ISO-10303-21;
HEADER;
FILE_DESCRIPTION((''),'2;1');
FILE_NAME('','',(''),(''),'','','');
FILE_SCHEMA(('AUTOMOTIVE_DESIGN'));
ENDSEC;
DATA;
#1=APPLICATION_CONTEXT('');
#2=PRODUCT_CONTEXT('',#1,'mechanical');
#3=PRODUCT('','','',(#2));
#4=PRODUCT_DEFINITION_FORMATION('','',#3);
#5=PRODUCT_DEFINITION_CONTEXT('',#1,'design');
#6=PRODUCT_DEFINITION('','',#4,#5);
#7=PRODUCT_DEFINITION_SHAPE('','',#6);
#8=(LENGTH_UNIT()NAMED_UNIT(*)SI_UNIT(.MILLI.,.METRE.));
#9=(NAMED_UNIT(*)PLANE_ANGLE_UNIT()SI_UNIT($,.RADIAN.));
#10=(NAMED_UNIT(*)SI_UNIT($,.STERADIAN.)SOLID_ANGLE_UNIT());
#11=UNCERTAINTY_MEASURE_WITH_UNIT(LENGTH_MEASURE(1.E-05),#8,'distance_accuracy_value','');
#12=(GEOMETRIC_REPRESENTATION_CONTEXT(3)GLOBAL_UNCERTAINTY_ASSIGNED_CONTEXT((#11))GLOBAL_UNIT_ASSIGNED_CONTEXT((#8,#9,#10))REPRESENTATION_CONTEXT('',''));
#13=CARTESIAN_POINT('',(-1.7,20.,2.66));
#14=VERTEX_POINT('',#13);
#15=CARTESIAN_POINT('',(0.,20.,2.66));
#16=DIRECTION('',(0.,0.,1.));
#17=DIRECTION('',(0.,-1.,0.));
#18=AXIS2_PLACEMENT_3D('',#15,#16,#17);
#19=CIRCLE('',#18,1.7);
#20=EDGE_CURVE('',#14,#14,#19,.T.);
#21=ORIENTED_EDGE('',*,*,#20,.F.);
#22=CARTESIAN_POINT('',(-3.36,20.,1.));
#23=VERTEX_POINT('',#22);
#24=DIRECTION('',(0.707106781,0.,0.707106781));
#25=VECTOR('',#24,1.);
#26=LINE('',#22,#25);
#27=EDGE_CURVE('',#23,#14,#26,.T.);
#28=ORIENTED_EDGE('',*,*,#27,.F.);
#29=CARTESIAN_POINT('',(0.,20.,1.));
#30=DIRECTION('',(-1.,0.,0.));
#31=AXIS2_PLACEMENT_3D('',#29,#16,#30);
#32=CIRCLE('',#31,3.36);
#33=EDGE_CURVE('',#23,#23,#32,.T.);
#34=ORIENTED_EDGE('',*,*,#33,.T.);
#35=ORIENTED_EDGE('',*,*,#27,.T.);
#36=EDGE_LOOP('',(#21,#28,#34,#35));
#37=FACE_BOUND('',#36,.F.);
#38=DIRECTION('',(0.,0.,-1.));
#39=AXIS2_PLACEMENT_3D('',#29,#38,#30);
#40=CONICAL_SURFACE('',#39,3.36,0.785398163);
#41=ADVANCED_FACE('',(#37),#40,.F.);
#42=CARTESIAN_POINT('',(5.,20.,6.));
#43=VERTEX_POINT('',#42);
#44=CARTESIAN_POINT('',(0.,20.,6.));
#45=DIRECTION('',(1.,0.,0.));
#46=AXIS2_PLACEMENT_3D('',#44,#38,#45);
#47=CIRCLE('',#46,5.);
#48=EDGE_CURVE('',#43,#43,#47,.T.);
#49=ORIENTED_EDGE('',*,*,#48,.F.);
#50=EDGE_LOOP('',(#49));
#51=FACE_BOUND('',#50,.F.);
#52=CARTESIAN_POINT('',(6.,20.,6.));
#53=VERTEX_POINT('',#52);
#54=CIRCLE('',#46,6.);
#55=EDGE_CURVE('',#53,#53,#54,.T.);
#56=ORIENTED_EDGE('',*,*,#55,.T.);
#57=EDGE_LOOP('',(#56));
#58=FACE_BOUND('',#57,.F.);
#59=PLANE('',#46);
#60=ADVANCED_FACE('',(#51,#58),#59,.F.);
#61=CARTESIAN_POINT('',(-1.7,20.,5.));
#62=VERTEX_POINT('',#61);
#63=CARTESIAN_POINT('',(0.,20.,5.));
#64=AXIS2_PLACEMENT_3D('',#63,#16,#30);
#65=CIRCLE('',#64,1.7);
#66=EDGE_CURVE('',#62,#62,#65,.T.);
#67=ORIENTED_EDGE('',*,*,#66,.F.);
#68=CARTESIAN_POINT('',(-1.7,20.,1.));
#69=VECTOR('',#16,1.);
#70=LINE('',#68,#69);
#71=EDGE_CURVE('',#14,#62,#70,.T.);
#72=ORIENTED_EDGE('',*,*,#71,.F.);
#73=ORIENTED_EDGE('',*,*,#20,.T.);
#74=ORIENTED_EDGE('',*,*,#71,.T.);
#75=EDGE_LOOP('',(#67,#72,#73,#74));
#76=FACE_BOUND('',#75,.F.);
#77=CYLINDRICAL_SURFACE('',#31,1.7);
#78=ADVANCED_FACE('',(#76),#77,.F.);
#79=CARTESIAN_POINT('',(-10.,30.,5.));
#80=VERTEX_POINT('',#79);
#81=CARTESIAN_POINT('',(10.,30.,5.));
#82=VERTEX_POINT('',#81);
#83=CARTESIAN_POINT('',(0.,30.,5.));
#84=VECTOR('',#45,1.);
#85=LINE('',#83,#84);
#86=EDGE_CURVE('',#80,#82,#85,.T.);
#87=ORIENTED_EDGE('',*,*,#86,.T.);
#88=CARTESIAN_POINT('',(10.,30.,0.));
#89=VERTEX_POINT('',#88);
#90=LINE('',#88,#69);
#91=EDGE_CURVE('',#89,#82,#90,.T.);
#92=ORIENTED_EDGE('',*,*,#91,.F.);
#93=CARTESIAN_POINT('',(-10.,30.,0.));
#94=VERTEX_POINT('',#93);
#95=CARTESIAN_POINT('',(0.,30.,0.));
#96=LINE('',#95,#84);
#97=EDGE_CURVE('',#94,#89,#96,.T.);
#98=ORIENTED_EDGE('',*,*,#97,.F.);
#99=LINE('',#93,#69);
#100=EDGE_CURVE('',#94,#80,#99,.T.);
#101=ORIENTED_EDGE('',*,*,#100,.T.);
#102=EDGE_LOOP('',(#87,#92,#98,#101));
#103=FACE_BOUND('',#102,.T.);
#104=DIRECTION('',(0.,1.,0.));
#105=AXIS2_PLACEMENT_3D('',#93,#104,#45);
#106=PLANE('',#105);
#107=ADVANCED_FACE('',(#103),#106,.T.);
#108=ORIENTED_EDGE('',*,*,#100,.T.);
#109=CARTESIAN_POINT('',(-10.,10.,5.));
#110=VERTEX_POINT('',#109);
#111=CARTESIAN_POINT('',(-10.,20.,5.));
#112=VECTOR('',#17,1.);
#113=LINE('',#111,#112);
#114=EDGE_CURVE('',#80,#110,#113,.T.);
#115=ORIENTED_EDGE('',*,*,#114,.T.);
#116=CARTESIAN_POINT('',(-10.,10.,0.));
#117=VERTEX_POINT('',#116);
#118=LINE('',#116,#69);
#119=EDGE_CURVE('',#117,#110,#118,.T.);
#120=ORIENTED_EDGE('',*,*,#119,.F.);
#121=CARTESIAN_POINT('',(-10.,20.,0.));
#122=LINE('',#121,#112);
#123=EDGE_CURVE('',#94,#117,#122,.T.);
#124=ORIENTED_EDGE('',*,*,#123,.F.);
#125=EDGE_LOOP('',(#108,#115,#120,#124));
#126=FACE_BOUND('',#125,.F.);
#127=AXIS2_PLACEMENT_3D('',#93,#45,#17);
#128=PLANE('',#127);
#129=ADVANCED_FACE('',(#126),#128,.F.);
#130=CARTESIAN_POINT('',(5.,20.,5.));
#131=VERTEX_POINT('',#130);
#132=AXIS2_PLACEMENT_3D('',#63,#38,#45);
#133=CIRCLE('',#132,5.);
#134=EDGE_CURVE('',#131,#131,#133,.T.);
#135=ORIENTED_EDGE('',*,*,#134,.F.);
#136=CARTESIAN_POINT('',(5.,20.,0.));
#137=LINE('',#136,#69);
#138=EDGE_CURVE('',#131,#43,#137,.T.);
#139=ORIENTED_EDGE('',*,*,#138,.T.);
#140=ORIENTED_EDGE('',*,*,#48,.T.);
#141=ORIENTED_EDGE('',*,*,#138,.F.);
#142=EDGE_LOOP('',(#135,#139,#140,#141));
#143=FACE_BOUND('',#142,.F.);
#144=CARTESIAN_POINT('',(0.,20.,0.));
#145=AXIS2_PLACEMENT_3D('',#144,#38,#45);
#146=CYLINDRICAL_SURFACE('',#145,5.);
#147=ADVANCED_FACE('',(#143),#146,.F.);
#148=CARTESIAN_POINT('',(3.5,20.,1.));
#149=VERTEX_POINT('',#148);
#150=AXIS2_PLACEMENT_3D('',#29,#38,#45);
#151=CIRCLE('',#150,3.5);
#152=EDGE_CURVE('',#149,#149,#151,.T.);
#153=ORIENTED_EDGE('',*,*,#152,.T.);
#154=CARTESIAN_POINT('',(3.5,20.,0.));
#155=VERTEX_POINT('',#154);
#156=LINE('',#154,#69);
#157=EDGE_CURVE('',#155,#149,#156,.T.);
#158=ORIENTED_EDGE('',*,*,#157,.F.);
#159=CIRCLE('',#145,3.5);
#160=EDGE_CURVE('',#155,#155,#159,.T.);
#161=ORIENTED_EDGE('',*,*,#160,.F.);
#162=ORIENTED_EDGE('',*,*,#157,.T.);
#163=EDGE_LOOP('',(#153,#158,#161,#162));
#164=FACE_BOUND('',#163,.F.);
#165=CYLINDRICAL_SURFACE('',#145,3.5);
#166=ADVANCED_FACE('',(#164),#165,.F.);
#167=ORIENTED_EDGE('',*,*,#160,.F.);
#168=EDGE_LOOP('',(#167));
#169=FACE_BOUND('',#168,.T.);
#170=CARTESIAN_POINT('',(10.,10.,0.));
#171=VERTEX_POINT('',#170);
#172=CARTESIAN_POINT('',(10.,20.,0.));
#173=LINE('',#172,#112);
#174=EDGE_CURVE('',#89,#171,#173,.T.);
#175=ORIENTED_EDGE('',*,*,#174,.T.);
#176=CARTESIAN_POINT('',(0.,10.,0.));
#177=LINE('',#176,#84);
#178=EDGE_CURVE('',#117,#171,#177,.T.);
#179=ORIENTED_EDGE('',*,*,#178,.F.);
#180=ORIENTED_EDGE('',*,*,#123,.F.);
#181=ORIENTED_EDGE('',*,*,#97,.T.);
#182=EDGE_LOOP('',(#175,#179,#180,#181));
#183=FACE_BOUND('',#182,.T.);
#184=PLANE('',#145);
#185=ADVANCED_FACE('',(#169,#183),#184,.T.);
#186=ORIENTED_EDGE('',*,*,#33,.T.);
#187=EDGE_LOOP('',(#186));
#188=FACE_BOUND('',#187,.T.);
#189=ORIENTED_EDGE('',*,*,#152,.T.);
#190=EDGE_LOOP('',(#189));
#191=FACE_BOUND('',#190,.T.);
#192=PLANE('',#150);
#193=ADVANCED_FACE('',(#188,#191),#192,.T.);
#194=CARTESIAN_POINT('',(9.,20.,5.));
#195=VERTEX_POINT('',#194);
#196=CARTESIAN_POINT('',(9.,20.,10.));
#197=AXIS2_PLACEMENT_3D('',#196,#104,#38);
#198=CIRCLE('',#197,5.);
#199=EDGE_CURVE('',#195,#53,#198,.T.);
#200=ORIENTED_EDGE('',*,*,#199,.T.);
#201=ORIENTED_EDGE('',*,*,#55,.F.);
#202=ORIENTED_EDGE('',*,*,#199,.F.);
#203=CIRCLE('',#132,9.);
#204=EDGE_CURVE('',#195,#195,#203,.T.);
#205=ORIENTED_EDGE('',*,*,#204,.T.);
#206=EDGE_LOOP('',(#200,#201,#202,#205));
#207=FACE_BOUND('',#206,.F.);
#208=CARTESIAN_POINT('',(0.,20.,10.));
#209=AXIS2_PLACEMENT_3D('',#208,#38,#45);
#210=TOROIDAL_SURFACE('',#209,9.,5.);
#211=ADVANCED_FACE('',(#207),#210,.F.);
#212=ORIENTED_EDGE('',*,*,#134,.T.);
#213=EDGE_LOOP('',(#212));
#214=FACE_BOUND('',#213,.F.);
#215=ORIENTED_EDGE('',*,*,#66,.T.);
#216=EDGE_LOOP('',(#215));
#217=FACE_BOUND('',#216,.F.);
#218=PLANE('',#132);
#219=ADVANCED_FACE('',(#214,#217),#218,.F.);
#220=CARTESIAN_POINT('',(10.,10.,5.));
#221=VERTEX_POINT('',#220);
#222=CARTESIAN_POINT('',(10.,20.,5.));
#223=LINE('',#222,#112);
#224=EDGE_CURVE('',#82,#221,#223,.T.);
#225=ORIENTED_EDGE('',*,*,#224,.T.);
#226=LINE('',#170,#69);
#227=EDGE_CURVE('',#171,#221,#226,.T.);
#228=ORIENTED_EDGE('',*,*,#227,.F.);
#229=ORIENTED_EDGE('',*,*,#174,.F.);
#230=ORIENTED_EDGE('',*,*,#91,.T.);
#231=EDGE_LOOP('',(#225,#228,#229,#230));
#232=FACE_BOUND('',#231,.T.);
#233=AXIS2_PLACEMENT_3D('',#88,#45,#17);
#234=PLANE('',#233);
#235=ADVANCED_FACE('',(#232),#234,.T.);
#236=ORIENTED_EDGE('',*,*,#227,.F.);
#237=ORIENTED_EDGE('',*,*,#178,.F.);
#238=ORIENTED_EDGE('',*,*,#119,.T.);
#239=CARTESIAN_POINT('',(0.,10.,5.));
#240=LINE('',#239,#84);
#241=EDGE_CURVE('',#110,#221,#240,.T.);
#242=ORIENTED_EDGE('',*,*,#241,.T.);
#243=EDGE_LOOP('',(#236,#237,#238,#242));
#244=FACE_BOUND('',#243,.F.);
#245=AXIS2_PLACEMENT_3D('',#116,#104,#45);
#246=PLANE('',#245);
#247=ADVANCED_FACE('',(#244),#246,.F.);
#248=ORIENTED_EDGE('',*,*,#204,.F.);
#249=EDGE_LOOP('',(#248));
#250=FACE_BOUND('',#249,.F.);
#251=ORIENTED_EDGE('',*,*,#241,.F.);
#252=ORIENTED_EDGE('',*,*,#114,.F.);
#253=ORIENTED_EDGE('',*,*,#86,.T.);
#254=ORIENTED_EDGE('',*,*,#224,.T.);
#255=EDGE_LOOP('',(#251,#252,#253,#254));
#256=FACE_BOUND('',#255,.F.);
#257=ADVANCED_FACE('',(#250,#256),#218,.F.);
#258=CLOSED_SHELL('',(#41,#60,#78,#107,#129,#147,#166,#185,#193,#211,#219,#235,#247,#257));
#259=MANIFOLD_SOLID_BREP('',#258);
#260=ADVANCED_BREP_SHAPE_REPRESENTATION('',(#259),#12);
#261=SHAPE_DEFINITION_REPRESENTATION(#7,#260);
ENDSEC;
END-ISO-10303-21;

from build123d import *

# Parameters (mm, degrees)
F0_W           = 20
F0_H           = 20
F0_R           = 6
F0_R_2         = 5
F0_R_3         = 3.5
F1_DEPTH       = 5
F2_DEPTH       = 6
F3_DEPTH       = 1
F4_D           = 3.4
F4_START       = 1
F4_CSINK_D     = 6.72
F4_CSINK_ANGLE = 90
F6_ANGLE       = 180


# Not quite as in the source:
# - a fillet or chamfer that OpenCascade refuses, or shapes differently, is made with other operations: its cross-section is extruded or revolved along the edge and cut away or added


with BuildPart() as f1:
    # F0 (on Top) → F1 (new body)
    with BuildSketch(Plane.XY):
        Rectangle(F0_W, F0_H)
        Circle(F0_R, mode=Mode.SUBTRACT)
        Circle(F0_R)
        Circle(F0_R_2, mode=Mode.SUBTRACT)
        Circle(F0_R_2)
        Circle(F0_R_3, mode=Mode.SUBTRACT)
        Circle(F0_R_3)
    extrude(amount=-F1_DEPTH)

    # F0 (on Top) → F2 (join)
    with BuildSketch(Plane.XY):
        Circle(F0_R)
        Circle(F0_R_2, mode=Mode.SUBTRACT)
    extrude(amount=-F2_DEPTH)

    # F0 (on Top) → F3 (cut)
    with BuildSketch(Plane.XY):
        Circle(F0_R_3)
    extrude(amount=-F3_DEPTH, mode=Mode.SUBTRACT)

    # F4 (through all)
    # its depths count from where the whole tool has entered the part; down to there all is cleared
    with Locations(Plane.XY.offset(-F4_START)):
        with Locations((0, 0)):
            CounterSinkHole(F4_D / 2, F4_CSINK_D / 2, counter_sink_angle=F4_CSINK_ANGLE)

    # F5: fillet of radius 5 on 1 edges, made by hand

    # F5_s1 → F5_t2 (revolve)
    with BuildSketch(Plane.XZ):
        with BuildLine():
            ThreePointArc((9, -5), (7.4188611699, -5.2565835097), (6, -6))
            Line((6, -6), (5.94, -5.92))
            ThreePointArc((5.94, -5.92), (5.9, -5.5), (5.9, -5))
            Line((5.9, -5), (6, -4.9))
            Line((6, -4.9), (9, -4.9))
            Line((9, -4.9), (9, -5))
        make_face()
    revolve(axis=Axis((0, 0, -5), (0, 0, 1)))


with BuildPart() as f1_1:
    # F6: moved
    add(f1.part.rotate(Axis((0, 10, 0), (-1, 0, 0)), F6_ANGLE))


solid = f1_1.part
